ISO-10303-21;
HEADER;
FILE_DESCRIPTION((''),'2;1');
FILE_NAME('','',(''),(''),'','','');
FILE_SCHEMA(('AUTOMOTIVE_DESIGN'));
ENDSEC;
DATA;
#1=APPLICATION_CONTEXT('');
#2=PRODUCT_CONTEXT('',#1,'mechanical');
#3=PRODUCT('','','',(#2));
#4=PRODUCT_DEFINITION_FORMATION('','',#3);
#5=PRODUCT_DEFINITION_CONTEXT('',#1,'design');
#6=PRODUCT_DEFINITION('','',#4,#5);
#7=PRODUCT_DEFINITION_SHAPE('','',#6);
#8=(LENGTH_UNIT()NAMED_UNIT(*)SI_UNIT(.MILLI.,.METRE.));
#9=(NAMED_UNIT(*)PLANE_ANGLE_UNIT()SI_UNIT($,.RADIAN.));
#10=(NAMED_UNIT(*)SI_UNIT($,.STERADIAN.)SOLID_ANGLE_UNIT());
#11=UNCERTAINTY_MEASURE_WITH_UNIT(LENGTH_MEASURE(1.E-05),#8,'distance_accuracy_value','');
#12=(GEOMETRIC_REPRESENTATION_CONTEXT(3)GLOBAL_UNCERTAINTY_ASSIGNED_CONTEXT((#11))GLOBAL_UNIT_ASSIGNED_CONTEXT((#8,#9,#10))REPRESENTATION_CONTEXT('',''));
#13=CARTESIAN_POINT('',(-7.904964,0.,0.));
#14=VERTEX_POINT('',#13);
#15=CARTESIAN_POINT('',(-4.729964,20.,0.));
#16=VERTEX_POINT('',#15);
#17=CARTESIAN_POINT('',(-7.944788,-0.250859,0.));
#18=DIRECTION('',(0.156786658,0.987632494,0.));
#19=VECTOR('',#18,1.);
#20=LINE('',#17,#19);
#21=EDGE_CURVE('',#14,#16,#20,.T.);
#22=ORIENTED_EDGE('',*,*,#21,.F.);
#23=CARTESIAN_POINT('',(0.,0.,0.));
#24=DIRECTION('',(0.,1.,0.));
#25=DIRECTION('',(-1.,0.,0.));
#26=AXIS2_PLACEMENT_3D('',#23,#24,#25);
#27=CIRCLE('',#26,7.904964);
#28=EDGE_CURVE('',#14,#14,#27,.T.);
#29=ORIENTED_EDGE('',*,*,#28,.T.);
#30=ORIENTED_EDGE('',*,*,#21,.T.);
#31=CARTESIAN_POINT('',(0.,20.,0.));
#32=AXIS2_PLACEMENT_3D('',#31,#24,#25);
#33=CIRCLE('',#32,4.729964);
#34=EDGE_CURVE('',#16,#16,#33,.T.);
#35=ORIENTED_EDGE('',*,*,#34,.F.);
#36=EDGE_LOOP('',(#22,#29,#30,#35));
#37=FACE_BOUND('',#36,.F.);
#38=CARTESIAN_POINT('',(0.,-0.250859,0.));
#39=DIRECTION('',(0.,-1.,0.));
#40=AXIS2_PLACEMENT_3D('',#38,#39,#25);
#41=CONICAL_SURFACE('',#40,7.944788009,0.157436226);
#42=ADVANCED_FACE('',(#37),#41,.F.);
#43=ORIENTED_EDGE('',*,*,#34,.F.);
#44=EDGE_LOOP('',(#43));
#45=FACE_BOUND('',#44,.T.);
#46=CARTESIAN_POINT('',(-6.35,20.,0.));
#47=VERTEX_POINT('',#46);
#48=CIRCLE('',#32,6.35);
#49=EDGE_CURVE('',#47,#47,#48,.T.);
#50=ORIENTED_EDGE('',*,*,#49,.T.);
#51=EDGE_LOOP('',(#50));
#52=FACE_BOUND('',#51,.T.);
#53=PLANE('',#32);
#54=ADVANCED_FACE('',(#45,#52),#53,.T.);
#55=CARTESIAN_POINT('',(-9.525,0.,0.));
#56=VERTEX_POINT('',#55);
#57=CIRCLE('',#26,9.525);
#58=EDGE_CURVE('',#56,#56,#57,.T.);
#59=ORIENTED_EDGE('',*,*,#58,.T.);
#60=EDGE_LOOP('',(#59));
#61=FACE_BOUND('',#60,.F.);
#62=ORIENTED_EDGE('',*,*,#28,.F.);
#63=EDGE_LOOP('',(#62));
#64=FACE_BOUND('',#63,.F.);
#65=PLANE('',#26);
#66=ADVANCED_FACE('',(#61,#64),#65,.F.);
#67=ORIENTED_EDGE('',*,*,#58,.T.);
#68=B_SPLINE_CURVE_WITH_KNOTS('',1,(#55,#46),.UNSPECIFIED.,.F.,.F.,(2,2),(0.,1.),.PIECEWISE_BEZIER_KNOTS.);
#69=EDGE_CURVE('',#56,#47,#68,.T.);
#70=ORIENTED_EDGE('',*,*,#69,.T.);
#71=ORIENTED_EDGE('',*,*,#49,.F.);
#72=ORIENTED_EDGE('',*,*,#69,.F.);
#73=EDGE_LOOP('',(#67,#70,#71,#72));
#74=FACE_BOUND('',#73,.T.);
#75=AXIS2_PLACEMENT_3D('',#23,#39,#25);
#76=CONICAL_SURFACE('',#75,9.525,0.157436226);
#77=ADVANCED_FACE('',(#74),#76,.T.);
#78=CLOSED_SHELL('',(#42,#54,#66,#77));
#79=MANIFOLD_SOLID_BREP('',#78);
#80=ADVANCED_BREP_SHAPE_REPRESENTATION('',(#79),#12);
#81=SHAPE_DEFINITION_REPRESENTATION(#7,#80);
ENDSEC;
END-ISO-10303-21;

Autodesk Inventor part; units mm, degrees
ref_plane "YZ Plane" through (0, 0, 0) normal (1, 0, 0) x (0, 1, 0)
ref_plane "XY Plane" through (0, 0, 0) normal (0, 0, 1) x (1, 0, 0)
sketch "Szkic6" plane through (0, 0, 0) normal (0, 1, 0) x (-1, 0, 0)
  circle A0 centre (0, 0) radius 9.525
  dimension "d33" = 19.05
ref_plane "Płaszczyzna konstrukcyjna1" through (0, 20, 0) normal (0, 1, 0) x (-1, 0, 0)
sketch "Szkic7" plane through (0, 20, 0) normal (0, 1, 0) x (-1, 0, 0)
  circle A0 centre (0, 0) radius 6.35
  dimension "d35" = 12.7
loft "Wyciągnięcie złożone1" add profiles "Szkic6", "Szkic7"
shell "Skorupa1" thickness 1.6 removed faces 2 at (1.8127, 20, -0.4771) at (2.8113, 0, 0.0442)
equation "\"d33\" = OD1"
equation "\"d35\" = OD2"
equation "\"d52\" = THK"
equation "\"SzerokośćGięciaPodcięcia\" = Grubość"
equation "\"RozmiarPodcięciaNarożnika\" = 4 * Grubość"
equation "\"PromieńPrzejścia\" = PromieńGięcia"
equation "\"Rozmiar_promienia_Jacobiego\" = PromieńGięcia"
equation "\"Wielk_odstępu\" = Grubość"
equation "\"d2\" = PromieńGięcia"
equation "\"d23\" = PromieńGięcia"
equation "\"OD1\" = 19.05"
equation "\"OD2\" = 12.7"
equation "\"THK\" = 1.6"
equation "\"Grubość\" = 1.5"
equation "\"PromieńGięcia\" = 3"
properties part number "Redukcja symetryczna Ø19,05x12,7x1,6 L=20" material "304"
